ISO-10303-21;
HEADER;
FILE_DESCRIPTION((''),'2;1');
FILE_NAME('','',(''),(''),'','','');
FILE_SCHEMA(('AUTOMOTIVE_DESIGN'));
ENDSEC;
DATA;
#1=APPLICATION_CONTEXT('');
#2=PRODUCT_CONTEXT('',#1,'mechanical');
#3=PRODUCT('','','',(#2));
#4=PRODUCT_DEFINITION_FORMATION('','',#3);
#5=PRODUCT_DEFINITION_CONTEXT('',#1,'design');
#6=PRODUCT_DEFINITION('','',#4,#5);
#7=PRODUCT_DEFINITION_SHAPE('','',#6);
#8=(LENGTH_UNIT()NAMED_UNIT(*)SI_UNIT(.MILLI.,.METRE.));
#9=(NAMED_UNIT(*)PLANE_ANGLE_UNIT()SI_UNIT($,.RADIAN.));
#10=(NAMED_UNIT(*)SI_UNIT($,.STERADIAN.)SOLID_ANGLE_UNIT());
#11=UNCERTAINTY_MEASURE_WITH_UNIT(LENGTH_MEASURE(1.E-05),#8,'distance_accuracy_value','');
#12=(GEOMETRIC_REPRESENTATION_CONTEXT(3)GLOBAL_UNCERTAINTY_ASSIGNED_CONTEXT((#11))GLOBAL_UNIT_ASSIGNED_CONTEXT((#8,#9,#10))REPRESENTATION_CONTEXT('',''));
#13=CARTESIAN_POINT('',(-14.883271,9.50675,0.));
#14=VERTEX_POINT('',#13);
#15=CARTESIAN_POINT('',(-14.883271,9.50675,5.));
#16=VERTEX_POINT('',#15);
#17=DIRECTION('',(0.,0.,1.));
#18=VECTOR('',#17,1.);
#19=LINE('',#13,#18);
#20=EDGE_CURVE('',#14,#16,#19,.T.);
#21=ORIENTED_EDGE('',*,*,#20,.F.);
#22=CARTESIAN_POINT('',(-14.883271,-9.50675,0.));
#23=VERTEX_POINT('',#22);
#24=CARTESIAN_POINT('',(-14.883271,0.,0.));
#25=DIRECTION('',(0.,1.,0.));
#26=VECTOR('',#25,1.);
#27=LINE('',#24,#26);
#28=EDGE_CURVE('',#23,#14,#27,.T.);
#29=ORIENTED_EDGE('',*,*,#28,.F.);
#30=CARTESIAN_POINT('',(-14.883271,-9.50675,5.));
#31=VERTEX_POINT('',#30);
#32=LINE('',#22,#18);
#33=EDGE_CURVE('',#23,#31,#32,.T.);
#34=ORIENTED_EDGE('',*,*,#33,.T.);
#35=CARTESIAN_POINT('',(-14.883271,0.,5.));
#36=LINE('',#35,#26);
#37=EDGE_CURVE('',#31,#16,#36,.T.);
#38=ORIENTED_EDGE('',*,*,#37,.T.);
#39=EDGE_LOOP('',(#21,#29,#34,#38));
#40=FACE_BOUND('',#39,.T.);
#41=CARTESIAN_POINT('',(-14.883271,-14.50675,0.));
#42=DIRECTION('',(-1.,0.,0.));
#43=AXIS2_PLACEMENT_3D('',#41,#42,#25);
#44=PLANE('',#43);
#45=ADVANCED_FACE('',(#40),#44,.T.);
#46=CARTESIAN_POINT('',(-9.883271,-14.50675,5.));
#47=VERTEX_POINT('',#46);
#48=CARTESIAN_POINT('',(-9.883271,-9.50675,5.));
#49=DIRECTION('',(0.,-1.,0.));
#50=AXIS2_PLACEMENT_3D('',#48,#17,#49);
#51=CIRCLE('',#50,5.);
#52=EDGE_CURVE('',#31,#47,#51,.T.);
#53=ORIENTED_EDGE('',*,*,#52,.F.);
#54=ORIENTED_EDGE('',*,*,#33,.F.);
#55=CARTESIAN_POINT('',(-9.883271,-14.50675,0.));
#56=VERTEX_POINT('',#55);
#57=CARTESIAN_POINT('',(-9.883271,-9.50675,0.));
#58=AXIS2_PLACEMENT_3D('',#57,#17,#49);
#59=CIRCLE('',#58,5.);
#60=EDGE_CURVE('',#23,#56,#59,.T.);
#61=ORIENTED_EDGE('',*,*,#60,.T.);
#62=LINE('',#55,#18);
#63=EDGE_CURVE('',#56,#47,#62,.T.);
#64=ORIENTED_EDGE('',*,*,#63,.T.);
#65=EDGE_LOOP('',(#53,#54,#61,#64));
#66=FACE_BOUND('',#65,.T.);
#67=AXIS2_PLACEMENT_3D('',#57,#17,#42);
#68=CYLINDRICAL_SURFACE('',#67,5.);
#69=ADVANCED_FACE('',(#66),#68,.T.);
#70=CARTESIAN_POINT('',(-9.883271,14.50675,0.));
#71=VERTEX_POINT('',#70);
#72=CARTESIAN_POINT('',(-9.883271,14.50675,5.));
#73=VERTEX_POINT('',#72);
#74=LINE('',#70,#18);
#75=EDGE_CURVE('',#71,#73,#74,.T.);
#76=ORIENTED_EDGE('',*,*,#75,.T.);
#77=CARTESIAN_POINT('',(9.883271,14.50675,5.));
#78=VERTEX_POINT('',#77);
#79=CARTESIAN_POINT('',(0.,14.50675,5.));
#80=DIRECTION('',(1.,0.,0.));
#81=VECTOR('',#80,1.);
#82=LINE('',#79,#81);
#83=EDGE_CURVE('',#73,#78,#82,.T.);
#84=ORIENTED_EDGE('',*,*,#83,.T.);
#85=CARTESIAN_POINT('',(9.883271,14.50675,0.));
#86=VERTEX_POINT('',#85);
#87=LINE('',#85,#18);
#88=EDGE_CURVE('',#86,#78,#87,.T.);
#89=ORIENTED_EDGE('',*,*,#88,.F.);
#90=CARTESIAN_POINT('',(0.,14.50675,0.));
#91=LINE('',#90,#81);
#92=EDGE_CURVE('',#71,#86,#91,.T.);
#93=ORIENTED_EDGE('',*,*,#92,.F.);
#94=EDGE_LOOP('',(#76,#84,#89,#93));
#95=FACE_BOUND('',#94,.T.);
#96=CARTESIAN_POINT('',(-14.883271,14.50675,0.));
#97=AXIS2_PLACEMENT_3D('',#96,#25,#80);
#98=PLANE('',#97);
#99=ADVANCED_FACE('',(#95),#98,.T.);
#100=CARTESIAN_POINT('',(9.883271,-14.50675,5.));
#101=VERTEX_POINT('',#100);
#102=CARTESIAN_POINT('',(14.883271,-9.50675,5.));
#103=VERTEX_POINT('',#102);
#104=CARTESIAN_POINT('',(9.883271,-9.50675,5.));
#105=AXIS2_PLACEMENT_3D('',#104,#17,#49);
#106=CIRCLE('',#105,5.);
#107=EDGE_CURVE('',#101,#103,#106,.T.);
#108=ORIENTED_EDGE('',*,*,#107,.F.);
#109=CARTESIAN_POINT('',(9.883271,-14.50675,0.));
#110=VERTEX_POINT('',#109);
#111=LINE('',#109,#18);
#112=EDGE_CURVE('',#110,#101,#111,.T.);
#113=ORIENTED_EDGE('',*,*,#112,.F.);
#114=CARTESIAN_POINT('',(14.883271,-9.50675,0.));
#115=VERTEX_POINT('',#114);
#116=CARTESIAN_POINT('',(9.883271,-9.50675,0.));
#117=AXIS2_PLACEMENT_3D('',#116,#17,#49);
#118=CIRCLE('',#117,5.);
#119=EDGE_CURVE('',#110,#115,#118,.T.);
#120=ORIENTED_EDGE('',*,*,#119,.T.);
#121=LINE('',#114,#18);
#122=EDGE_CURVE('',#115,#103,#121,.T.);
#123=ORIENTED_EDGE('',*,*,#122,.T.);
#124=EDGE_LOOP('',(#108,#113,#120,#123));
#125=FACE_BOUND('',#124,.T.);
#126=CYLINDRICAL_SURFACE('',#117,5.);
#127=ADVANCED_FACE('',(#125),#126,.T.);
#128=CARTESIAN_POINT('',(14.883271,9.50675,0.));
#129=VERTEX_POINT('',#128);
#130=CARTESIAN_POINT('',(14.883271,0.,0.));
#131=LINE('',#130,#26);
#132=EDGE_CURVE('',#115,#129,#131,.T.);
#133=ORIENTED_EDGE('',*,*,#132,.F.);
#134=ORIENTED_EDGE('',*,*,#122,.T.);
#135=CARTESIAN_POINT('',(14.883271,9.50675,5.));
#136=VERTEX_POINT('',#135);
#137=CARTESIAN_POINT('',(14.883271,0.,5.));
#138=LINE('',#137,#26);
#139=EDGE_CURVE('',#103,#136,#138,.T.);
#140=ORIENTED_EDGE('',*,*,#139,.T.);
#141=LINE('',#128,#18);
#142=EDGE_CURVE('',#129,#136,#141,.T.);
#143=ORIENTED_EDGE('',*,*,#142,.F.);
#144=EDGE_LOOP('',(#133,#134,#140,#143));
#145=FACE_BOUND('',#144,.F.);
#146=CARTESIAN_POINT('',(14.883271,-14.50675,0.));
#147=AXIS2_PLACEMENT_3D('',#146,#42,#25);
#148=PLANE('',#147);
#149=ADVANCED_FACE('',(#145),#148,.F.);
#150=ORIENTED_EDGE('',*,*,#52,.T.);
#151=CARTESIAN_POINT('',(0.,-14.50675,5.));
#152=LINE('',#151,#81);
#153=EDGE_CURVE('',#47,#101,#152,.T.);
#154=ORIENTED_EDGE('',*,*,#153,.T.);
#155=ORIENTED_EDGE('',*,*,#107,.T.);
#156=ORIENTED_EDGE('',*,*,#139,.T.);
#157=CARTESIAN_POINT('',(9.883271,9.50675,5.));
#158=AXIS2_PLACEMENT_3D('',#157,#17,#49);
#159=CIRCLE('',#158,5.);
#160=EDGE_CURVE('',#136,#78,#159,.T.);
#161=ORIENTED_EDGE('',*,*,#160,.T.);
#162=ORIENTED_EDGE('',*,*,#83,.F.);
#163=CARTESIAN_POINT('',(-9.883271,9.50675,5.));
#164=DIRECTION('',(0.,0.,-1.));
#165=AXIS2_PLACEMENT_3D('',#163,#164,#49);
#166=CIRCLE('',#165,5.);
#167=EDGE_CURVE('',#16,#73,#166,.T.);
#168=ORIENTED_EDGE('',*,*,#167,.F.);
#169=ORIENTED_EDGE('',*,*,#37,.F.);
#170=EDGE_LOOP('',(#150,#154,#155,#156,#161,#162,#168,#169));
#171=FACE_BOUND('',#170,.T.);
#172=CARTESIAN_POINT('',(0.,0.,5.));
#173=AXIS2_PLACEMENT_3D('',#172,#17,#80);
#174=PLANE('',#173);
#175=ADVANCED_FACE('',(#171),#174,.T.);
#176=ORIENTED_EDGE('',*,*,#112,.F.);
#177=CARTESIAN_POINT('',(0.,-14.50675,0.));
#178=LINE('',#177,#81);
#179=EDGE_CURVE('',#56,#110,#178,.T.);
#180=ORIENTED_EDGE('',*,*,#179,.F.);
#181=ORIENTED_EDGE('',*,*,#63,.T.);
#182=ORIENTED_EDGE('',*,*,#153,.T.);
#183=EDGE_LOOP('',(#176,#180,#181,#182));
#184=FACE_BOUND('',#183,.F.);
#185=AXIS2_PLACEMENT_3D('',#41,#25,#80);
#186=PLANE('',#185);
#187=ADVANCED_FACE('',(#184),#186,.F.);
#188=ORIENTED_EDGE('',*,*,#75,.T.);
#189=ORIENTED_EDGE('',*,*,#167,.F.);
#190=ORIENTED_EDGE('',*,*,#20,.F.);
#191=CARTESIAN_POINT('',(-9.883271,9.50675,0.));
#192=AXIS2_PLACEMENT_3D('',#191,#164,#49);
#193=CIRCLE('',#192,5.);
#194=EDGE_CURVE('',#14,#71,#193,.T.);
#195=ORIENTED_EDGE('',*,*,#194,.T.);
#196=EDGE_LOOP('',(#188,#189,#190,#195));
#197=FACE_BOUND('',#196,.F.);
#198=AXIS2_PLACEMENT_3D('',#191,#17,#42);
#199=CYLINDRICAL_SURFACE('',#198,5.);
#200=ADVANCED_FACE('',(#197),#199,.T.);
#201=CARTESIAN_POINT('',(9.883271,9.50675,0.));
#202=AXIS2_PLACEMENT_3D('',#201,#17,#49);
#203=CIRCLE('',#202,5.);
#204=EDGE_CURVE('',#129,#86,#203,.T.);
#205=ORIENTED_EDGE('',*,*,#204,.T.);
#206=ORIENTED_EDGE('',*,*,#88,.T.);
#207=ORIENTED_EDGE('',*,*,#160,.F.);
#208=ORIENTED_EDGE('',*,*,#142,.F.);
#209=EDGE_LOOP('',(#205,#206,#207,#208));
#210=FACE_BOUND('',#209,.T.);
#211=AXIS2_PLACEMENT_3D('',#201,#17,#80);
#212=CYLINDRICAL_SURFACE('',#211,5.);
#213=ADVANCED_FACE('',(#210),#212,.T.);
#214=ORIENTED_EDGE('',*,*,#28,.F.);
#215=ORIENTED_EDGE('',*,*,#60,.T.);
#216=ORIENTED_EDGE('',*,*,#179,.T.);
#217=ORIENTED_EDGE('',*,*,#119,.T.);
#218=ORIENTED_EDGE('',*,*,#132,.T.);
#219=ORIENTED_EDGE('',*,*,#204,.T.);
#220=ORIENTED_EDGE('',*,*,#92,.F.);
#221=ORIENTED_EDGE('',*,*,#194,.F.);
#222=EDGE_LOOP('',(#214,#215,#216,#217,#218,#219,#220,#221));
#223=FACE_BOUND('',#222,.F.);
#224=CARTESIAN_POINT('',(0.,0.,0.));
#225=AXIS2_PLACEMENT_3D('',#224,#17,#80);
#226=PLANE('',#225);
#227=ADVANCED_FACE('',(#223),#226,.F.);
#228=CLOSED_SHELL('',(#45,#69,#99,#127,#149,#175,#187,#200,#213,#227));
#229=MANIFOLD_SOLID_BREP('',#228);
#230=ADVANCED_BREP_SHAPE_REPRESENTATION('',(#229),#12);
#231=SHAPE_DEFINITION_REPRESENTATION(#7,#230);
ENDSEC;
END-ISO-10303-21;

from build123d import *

# Parameters (mm, degrees)
F0_W     = 29.766542837
F0_H     = 29.0134996176
F1_DEPTH = 5
F4_R     = 5


# Not quite as in the source:
# - the program builds the solid bodies; features that only make, move or delete a surface that nothing else refers to are left out


with BuildPart() as f1:
    # F0 (on Top) → F1 (new body)
    with BuildSketch(Plane.XY):
        Rectangle(F0_W, F0_H)
    extrude(amount=F1_DEPTH)

    # F4
    f4_edges = [f1.edges().sort_by_distance(p)[0] for p in [
        (14.883271, 14.50675, 2.5),
        (14.883271, -14.50675, 2.5),
        (-14.883271, 14.50675, 2.5),
        (-14.883271, -14.50675, 2.5),
    ]]
    fillet(f4_edges, radius=F4_R)


solid = f1.part
